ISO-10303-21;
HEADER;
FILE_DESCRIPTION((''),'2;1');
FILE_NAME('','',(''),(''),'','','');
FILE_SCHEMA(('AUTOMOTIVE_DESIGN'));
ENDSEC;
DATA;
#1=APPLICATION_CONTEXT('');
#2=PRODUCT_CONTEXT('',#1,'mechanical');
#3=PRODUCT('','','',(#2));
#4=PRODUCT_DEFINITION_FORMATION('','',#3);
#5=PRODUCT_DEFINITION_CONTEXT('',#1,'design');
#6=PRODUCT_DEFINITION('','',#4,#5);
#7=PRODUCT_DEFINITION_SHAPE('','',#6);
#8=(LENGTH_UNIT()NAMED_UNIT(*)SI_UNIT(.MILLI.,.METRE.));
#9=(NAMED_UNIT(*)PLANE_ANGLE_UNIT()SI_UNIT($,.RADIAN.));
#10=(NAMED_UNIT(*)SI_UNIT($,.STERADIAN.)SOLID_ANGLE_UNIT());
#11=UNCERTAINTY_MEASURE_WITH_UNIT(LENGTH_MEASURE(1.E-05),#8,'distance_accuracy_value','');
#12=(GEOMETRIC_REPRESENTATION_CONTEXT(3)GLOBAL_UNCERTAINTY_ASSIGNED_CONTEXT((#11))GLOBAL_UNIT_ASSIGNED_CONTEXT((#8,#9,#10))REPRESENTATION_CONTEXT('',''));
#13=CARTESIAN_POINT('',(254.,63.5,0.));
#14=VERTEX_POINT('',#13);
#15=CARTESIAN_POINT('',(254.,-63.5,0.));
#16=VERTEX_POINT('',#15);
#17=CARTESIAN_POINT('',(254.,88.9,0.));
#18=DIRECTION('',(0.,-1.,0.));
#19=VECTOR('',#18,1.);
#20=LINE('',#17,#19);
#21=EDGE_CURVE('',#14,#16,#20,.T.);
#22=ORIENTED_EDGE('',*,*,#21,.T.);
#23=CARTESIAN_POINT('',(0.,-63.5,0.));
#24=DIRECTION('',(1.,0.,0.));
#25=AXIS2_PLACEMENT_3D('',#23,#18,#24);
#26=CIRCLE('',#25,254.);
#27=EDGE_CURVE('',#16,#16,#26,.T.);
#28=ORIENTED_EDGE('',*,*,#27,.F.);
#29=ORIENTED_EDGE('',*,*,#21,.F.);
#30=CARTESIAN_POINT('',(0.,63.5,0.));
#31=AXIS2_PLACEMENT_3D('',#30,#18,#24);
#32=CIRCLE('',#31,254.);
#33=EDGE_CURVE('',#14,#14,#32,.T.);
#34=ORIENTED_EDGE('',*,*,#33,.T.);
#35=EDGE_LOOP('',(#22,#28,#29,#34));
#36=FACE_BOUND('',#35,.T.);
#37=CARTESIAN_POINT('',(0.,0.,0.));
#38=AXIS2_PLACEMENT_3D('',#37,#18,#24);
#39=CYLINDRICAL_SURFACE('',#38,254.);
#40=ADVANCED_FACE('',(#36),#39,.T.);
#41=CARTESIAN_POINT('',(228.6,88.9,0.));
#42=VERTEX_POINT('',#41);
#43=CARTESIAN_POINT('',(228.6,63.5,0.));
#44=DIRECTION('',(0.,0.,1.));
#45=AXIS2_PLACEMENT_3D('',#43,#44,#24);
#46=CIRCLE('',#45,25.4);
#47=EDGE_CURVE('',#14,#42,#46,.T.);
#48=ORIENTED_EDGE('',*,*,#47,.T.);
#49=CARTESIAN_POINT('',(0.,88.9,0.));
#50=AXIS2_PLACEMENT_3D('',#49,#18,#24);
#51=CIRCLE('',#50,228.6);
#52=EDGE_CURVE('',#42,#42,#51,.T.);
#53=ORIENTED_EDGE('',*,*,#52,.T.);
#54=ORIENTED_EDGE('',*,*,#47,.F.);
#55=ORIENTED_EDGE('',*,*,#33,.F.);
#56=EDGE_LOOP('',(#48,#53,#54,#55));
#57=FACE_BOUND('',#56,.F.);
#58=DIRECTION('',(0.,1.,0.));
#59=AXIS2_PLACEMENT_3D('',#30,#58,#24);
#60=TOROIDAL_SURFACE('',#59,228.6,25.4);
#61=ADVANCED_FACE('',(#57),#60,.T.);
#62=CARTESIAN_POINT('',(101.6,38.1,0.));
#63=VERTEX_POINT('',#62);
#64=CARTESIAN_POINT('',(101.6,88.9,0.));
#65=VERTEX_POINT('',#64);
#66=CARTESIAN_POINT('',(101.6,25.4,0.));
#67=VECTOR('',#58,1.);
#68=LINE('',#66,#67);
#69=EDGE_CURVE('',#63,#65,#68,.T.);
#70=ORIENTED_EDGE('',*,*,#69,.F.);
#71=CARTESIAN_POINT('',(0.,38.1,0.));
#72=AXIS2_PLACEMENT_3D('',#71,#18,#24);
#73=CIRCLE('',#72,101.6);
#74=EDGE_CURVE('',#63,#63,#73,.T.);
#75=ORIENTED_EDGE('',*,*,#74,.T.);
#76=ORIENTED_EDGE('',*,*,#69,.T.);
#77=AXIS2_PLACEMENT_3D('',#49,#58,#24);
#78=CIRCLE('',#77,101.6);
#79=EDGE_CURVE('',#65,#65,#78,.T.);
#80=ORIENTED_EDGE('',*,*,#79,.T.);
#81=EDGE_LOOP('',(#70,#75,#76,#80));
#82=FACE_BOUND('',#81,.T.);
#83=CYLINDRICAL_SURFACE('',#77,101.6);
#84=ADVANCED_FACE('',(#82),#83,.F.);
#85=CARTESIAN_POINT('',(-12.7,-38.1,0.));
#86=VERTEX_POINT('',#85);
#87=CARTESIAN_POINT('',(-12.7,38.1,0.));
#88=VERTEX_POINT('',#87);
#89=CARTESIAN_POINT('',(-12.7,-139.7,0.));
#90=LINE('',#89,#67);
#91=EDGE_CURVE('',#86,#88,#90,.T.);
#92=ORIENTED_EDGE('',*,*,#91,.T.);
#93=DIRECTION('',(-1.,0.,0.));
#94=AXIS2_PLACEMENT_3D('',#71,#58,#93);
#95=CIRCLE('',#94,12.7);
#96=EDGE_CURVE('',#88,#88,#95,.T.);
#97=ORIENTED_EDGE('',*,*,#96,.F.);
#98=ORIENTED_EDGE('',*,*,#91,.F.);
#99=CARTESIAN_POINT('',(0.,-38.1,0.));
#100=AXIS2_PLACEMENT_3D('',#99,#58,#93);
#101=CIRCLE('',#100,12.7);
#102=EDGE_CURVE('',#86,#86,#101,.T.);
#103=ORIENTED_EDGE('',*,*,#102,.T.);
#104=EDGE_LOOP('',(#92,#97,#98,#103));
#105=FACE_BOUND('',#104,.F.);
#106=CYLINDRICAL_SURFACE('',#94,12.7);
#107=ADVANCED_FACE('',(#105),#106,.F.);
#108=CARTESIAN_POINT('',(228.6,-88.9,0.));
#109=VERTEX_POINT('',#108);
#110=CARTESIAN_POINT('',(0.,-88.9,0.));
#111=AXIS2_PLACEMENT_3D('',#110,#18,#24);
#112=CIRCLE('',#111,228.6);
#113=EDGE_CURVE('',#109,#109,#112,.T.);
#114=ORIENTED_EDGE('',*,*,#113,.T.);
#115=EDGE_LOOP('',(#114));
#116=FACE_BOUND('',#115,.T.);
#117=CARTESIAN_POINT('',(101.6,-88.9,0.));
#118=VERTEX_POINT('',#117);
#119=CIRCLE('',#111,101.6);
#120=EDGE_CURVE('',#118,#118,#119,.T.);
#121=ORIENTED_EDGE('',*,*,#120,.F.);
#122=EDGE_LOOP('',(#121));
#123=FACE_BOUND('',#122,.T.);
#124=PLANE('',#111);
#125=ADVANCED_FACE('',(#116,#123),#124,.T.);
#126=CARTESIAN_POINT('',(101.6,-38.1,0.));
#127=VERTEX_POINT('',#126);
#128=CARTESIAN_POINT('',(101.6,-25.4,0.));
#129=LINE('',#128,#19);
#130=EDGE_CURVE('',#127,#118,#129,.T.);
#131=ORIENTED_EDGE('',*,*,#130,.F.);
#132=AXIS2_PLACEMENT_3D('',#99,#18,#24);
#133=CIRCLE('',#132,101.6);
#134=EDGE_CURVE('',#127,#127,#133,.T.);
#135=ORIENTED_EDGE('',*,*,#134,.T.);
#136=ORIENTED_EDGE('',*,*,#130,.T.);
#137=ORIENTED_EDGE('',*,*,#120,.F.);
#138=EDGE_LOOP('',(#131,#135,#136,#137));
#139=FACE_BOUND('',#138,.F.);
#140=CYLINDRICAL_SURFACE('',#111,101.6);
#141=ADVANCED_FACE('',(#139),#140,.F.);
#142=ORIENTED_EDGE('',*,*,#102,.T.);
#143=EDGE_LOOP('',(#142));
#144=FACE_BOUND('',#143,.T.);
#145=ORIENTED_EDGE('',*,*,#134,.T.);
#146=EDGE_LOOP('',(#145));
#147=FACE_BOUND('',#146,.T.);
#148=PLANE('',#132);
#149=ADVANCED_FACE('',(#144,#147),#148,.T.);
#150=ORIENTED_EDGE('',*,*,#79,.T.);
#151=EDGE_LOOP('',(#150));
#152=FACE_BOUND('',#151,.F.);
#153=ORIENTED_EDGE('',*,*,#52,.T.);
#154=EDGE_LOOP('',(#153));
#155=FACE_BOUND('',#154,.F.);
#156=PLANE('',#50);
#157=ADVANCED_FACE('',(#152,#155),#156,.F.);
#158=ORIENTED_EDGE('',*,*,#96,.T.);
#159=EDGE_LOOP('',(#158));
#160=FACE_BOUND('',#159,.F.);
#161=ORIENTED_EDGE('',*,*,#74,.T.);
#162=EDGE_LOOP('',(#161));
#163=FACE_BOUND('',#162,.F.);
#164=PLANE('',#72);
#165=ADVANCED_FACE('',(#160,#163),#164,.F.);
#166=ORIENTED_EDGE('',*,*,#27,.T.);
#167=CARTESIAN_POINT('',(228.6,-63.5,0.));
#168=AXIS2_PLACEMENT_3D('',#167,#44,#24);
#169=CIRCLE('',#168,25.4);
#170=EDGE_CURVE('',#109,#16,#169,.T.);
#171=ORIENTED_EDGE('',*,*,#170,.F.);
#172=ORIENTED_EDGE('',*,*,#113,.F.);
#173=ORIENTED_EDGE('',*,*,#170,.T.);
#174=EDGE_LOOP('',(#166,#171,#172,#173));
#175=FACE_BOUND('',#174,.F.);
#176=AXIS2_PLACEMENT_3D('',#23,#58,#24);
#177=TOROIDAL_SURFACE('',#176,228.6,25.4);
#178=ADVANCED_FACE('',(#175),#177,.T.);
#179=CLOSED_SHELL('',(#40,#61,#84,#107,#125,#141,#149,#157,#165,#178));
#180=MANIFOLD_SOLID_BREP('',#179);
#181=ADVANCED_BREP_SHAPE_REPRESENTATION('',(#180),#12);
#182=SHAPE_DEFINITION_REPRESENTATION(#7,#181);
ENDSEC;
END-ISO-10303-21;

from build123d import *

# Parameters (mm, degrees)
F0_R      = 254
F1_DEPTH  = 88.9
F2_R      = 101.6
F3_DEPTH  = 63.5
F8_R      = 101.6
F9_DEPTH  = 177.8
F10_R     = 101.6
F11_DEPTH = 38.1
F12_R     = 25.4
F13_R     = 12.7
F14_DEPTH = 177.8


# Not quite as in the source:
# - a feature of the source that left no trace in its solid (it failed there, or was rolled back) is left out
# - a pattern or mirror of a feature is missing from the dataset's text; its kind, count and spacing are read off the source's solid


with BuildPart() as f1:
    # F0 (on Front) → F1 (new body, symmetric)
    with BuildSketch(Plane.XZ):
        Circle(F0_R)
    extrude(amount=F1_DEPTH, both=True)

    # F2 (on face) → F3 (cut, symmetric)
    with BuildSketch(Plane.XZ.offset(88.9)):
        Circle(F2_R)
    f3 = extrude(amount=F3_DEPTH, both=True, mode=Mode.SUBTRACT)

    # F3_copies: F3 across plane
    add(f3.mirror(Plane.ZX), mode=Mode.SUBTRACT)

    # F8 (on face) → F9 (cut, symmetric)
    with BuildSketch(Plane.XZ.offset(152.4)):
        Circle(F8_R)
    extrude(amount=F9_DEPTH, both=True, mode=Mode.SUBTRACT)

    # F10 (on Front) → F11 (join, symmetric)
    with BuildSketch(Plane.XZ):
        Circle(F10_R)
    extrude(amount=F11_DEPTH, both=True)

    # F12
    f12_edges = [f1.edges().sort_by_distance(p)[0] for p in [
        (-254, 88.9, 0),
        (-254, -88.9, 0),
    ]]
    fillet(f12_edges, radius=F12_R)

    # F13 (on face) → F14 (cut, symmetric)
    with BuildSketch(Plane(origin=(0, 38.1, 0), x_dir=(-1, 0, 0), z_dir=(0, 1, 0))):
        Circle(F13_R)
    extrude(amount=F14_DEPTH, both=True, mode=Mode.SUBTRACT)


solid = f1.part
